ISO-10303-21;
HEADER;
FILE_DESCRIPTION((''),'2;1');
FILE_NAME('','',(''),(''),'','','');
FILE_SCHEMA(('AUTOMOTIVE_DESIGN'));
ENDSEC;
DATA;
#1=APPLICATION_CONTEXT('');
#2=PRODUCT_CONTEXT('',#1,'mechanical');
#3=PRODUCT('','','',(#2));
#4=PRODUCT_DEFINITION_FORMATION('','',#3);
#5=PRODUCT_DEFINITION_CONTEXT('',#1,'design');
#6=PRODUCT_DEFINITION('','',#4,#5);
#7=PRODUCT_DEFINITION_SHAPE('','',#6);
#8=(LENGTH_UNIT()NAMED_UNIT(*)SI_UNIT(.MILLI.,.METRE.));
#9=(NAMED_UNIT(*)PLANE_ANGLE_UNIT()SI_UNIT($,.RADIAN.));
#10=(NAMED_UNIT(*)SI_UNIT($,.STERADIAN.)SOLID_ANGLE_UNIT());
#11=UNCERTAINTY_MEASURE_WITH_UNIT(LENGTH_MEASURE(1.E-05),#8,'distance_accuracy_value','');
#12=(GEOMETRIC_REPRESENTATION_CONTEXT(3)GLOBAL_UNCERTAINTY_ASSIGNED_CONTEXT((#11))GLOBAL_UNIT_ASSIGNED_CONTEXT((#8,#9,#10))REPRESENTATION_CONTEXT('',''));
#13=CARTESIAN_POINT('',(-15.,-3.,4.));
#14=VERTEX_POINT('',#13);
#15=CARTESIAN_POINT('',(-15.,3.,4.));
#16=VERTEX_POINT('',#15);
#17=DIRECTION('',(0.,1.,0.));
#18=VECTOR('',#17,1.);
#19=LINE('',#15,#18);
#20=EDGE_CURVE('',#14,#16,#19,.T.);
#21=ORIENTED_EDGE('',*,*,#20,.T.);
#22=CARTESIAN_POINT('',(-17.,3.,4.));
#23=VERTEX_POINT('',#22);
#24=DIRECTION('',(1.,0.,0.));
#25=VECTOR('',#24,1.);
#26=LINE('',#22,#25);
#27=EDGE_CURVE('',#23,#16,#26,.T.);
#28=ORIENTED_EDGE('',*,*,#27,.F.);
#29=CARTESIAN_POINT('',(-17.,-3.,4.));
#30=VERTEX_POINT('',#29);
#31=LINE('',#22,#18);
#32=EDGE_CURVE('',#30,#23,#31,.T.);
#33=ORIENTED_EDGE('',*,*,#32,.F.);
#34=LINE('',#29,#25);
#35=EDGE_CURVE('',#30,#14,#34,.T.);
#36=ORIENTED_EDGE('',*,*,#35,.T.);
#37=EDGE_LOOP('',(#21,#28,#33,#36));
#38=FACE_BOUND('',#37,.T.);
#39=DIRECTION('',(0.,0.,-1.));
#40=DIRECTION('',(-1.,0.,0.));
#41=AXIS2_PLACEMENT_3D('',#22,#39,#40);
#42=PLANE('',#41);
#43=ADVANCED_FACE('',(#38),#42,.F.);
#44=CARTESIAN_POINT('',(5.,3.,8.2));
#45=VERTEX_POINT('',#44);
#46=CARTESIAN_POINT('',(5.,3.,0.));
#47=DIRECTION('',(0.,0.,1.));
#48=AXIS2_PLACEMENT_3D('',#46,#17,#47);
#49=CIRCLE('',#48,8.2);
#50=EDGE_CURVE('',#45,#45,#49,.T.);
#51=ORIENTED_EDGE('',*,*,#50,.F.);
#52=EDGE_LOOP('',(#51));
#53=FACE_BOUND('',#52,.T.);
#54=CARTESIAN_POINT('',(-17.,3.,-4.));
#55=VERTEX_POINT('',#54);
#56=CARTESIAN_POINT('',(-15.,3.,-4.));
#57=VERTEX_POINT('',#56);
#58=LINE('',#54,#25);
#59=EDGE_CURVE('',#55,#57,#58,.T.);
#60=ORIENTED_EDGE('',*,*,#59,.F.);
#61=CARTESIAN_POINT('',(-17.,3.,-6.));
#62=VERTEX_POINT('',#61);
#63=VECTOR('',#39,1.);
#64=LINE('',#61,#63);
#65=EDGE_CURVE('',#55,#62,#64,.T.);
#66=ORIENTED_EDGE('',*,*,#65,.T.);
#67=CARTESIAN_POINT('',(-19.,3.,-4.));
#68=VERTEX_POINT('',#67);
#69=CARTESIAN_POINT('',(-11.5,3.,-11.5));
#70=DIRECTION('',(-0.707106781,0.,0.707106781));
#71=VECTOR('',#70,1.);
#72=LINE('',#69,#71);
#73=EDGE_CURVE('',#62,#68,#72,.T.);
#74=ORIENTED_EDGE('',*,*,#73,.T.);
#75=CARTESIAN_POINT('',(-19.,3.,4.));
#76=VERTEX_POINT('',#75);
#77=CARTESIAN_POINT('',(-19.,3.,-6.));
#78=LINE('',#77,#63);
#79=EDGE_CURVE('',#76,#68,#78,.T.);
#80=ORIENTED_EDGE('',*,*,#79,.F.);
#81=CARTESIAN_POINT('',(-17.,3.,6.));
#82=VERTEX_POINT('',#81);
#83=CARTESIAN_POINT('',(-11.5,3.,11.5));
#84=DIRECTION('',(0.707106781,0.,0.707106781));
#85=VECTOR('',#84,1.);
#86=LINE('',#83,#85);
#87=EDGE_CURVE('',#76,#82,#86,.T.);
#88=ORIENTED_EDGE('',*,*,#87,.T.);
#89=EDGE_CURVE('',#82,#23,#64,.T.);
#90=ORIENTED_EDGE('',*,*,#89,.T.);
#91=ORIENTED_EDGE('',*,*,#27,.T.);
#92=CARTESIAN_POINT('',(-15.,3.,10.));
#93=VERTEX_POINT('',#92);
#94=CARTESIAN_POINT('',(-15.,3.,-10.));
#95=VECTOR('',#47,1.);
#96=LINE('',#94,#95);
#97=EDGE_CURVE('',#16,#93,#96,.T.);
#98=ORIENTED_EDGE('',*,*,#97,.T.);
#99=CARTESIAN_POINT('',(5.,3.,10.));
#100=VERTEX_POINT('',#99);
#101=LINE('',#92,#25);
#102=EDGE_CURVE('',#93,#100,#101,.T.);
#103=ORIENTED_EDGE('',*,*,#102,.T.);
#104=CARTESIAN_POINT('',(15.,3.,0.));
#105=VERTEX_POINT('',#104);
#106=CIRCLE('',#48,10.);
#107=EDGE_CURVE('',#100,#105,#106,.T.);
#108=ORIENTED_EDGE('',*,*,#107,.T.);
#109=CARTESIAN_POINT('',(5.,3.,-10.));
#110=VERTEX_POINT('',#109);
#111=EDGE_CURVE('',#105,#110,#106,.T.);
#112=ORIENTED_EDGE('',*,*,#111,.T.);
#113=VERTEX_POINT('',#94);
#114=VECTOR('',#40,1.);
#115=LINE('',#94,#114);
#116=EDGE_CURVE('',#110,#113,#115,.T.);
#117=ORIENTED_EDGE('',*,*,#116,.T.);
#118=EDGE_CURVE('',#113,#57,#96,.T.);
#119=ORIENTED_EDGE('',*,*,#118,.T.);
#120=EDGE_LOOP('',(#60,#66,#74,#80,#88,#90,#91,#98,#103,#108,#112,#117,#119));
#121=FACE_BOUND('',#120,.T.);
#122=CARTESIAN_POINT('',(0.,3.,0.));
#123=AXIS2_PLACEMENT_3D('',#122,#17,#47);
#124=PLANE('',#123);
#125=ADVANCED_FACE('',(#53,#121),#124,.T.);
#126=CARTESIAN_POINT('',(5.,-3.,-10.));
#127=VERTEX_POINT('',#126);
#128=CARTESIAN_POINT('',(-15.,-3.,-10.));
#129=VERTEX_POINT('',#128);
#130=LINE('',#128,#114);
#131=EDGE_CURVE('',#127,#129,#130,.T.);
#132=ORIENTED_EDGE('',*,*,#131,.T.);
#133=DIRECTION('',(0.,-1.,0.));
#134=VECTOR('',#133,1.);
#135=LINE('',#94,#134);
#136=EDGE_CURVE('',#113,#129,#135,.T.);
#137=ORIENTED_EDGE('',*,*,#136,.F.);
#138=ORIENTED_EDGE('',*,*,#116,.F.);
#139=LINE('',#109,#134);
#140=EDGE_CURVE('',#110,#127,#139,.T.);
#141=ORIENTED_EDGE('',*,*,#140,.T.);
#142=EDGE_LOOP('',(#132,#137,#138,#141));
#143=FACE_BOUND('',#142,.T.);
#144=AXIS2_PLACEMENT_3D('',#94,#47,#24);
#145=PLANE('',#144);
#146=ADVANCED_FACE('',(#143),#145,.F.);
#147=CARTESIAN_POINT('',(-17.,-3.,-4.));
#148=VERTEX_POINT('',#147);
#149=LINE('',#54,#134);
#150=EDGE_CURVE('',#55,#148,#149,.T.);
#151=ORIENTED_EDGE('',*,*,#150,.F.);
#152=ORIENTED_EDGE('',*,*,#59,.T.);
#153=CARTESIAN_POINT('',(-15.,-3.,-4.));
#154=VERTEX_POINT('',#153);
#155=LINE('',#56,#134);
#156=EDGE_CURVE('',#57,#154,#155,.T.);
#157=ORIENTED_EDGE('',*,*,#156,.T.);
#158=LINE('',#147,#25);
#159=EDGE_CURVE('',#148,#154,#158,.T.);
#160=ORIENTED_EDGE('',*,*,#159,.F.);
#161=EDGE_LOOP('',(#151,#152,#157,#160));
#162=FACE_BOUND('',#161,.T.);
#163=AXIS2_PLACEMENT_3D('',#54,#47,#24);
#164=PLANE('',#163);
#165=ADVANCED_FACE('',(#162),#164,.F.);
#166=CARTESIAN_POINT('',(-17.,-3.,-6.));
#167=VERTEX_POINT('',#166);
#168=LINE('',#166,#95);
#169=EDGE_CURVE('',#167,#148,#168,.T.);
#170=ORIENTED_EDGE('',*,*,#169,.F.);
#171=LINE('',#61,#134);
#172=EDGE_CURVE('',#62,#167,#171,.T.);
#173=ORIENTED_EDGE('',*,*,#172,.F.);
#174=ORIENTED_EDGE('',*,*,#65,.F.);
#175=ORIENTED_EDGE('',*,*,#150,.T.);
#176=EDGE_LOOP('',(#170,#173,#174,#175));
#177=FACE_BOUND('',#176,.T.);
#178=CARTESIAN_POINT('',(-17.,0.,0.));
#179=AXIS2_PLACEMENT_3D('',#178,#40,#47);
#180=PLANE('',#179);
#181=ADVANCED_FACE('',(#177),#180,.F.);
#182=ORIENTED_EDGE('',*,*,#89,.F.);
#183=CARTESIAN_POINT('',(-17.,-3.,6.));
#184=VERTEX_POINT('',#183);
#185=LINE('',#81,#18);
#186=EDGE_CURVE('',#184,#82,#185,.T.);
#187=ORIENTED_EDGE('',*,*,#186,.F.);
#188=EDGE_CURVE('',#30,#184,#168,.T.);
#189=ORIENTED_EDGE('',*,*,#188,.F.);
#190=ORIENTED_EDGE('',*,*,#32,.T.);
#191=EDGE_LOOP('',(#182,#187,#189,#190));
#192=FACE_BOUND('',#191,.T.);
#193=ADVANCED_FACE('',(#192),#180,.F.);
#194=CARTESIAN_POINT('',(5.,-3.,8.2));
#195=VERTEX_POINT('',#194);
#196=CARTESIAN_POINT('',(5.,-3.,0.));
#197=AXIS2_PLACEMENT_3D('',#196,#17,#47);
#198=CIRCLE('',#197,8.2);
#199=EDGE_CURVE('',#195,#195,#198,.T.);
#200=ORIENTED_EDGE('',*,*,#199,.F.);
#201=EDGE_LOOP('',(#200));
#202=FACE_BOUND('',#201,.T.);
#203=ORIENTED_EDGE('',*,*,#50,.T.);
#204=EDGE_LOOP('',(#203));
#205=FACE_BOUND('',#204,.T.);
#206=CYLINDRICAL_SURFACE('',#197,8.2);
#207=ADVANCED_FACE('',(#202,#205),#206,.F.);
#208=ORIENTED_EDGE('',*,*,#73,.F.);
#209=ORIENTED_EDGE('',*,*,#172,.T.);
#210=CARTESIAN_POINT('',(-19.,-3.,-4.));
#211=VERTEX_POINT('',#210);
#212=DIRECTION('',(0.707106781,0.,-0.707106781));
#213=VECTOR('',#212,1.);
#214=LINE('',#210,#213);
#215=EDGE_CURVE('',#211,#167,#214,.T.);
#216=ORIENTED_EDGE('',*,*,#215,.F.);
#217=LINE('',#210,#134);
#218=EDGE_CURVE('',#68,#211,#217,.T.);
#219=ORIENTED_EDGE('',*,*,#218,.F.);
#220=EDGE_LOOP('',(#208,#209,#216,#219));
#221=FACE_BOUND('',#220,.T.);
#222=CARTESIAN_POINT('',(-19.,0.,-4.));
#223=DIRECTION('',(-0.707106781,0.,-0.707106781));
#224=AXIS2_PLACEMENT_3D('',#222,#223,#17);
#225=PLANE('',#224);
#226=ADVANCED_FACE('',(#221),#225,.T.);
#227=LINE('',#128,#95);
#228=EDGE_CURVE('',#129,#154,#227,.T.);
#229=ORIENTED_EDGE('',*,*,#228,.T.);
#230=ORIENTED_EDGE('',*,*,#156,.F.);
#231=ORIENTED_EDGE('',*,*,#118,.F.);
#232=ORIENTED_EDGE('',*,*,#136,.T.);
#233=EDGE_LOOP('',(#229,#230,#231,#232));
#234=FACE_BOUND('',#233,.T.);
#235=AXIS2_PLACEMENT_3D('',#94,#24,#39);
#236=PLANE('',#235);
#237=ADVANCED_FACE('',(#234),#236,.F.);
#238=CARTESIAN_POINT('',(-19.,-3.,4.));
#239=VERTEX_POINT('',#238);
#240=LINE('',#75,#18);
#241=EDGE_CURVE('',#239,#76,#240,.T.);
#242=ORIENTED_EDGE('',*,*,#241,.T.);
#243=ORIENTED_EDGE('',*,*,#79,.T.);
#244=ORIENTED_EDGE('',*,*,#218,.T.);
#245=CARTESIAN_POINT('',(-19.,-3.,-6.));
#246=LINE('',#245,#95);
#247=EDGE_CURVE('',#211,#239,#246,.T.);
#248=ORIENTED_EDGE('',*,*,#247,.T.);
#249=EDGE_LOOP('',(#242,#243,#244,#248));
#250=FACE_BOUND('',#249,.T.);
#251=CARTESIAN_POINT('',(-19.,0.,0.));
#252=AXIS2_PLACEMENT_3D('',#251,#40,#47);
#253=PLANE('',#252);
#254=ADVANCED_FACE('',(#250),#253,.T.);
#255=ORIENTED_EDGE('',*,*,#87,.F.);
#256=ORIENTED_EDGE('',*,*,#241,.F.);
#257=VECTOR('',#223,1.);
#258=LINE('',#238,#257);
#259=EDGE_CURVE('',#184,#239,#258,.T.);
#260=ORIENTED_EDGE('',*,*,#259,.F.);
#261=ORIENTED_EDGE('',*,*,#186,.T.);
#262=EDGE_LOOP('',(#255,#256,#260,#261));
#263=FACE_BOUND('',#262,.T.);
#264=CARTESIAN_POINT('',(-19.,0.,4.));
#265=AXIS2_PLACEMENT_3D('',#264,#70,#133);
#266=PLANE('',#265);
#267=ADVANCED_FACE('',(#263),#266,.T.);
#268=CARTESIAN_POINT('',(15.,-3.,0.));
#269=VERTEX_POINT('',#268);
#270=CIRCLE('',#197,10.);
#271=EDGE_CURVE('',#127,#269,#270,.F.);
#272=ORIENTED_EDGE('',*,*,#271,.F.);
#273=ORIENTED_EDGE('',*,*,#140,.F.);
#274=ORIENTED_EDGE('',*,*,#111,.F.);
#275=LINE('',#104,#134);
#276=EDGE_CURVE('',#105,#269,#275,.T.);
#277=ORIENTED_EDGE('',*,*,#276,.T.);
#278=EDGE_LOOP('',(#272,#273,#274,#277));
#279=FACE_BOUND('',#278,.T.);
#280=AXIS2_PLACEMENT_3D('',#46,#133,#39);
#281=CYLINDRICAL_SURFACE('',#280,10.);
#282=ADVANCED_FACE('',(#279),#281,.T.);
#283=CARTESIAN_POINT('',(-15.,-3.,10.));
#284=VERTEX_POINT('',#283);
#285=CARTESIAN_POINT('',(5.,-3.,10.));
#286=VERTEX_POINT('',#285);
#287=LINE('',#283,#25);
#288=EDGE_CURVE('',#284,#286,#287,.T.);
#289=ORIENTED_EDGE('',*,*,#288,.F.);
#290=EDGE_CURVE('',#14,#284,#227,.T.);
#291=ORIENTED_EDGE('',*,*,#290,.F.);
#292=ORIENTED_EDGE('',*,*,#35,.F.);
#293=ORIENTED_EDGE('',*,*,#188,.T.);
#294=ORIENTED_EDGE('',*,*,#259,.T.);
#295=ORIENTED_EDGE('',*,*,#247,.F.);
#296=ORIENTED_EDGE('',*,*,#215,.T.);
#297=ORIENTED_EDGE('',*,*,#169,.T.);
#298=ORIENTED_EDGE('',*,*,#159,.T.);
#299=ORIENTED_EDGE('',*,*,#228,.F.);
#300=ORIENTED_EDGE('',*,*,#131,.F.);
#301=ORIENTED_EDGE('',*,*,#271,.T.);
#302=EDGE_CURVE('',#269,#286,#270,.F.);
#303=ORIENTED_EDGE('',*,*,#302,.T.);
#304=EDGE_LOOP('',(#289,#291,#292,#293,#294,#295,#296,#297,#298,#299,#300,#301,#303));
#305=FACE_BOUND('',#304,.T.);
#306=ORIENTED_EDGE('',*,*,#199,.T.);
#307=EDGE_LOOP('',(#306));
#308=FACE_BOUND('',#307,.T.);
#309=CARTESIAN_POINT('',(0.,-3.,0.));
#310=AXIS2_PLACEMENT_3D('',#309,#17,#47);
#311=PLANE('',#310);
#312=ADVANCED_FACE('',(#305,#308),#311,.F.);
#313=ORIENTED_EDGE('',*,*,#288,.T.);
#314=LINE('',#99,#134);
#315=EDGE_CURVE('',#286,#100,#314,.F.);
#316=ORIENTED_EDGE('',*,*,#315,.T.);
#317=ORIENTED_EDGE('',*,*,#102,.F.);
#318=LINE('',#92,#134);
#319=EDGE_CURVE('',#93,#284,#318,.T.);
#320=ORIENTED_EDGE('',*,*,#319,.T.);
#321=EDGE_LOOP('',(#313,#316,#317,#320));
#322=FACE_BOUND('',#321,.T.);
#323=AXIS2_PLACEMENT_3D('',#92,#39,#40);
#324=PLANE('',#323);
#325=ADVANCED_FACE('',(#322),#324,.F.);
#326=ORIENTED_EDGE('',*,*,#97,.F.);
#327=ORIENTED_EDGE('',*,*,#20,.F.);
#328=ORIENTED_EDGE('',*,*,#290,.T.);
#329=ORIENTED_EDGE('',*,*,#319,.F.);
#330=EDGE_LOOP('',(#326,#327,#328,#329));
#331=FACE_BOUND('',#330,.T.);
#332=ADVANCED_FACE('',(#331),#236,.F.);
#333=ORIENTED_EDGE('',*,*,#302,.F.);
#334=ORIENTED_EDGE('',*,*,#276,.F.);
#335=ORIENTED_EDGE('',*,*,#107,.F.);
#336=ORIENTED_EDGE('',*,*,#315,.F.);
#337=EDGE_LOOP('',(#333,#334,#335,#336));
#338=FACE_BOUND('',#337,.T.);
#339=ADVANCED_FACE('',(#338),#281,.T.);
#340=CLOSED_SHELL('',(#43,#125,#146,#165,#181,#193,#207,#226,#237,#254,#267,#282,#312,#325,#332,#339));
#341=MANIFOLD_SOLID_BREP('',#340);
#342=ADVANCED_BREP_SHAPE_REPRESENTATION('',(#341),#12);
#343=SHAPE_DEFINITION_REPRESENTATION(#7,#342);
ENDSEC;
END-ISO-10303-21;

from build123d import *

# Parameters (mm, degrees)
ESBO_O1_W                = 30
ESBO_O1_H                = 20
RESSALTO_EXTRUS_O1_DEPTH = 3
ESBO_O2_R                = 8.2
CORTE_EXTRUS_O1_DEPTH    = 20
FILETE1_R                = 10
ESBO_O3_W                = 8
ESBO_O3_H                = 6
RESSALTO_EXTRUS_O2_DEPTH = 2
ESBO_O4_W                = 12
ESBO_O4_H                = 6
RESSALTO_EXTRUS_O3_DEPTH = 2
CHANFRO1_SIZE            = 2


with BuildPart() as part:
    # Esboço1 → Ressalto-extrusão1 (new, symmetric)
    with BuildSketch(Plane(origin=(0, 0, 0), x_dir=(1, 0, 0), z_dir=(0, 1, 0))):
        Rectangle(ESBO_O1_W, ESBO_O1_H)
    extrude(amount=RESSALTO_EXTRUS_O1_DEPTH, both=True)

    # Esboço2 → Corte-extrusão1 (cut, through all)
    with BuildSketch(Plane(origin=(0, 3, 0), x_dir=(1, 0, 0), z_dir=(0, 1, 0))):
        with Locations(Location((5, 0, 0), (0, 0, 270))):
            Circle(ESBO_O2_R)
    extrude(amount=-CORTE_EXTRUS_O1_DEPTH, mode=Mode.SUBTRACT)

    # Filete1
    filete1_edges = [part.edges().sort_by_distance(p)[0] for p in [
        (15, 0, -10),
        (15, 0, 10),
    ]]
    fillet(filete1_edges, radius=FILETE1_R - 0.0001)  # a hair under: the kernel refuses the full size

    # Esboço3 → Ressalto-extrusão2 (add)
    with BuildSketch(Plane.ZY.offset(15)):
        Rectangle(ESBO_O3_W, ESBO_O3_H)
    extrude(amount=RESSALTO_EXTRUS_O2_DEPTH)

    # Esboço4 → Ressalto-extrusão3 (add)
    with BuildSketch(Plane.ZY.offset(17)):
        Rectangle(ESBO_O4_W, ESBO_O4_H)
    extrude(amount=RESSALTO_EXTRUS_O3_DEPTH)

    # Chanfro1
    chanfro1_edges = [part.edges().sort_by_distance(p)[0] for p in [
        (-19, 0, 6),
        (-19, 0, -6),
    ]]
    chamfer(chanfro1_edges, length=CHANFRO1_SIZE - 0.0001)  # a hair under: the kernel refuses the full size


solid = part.part
